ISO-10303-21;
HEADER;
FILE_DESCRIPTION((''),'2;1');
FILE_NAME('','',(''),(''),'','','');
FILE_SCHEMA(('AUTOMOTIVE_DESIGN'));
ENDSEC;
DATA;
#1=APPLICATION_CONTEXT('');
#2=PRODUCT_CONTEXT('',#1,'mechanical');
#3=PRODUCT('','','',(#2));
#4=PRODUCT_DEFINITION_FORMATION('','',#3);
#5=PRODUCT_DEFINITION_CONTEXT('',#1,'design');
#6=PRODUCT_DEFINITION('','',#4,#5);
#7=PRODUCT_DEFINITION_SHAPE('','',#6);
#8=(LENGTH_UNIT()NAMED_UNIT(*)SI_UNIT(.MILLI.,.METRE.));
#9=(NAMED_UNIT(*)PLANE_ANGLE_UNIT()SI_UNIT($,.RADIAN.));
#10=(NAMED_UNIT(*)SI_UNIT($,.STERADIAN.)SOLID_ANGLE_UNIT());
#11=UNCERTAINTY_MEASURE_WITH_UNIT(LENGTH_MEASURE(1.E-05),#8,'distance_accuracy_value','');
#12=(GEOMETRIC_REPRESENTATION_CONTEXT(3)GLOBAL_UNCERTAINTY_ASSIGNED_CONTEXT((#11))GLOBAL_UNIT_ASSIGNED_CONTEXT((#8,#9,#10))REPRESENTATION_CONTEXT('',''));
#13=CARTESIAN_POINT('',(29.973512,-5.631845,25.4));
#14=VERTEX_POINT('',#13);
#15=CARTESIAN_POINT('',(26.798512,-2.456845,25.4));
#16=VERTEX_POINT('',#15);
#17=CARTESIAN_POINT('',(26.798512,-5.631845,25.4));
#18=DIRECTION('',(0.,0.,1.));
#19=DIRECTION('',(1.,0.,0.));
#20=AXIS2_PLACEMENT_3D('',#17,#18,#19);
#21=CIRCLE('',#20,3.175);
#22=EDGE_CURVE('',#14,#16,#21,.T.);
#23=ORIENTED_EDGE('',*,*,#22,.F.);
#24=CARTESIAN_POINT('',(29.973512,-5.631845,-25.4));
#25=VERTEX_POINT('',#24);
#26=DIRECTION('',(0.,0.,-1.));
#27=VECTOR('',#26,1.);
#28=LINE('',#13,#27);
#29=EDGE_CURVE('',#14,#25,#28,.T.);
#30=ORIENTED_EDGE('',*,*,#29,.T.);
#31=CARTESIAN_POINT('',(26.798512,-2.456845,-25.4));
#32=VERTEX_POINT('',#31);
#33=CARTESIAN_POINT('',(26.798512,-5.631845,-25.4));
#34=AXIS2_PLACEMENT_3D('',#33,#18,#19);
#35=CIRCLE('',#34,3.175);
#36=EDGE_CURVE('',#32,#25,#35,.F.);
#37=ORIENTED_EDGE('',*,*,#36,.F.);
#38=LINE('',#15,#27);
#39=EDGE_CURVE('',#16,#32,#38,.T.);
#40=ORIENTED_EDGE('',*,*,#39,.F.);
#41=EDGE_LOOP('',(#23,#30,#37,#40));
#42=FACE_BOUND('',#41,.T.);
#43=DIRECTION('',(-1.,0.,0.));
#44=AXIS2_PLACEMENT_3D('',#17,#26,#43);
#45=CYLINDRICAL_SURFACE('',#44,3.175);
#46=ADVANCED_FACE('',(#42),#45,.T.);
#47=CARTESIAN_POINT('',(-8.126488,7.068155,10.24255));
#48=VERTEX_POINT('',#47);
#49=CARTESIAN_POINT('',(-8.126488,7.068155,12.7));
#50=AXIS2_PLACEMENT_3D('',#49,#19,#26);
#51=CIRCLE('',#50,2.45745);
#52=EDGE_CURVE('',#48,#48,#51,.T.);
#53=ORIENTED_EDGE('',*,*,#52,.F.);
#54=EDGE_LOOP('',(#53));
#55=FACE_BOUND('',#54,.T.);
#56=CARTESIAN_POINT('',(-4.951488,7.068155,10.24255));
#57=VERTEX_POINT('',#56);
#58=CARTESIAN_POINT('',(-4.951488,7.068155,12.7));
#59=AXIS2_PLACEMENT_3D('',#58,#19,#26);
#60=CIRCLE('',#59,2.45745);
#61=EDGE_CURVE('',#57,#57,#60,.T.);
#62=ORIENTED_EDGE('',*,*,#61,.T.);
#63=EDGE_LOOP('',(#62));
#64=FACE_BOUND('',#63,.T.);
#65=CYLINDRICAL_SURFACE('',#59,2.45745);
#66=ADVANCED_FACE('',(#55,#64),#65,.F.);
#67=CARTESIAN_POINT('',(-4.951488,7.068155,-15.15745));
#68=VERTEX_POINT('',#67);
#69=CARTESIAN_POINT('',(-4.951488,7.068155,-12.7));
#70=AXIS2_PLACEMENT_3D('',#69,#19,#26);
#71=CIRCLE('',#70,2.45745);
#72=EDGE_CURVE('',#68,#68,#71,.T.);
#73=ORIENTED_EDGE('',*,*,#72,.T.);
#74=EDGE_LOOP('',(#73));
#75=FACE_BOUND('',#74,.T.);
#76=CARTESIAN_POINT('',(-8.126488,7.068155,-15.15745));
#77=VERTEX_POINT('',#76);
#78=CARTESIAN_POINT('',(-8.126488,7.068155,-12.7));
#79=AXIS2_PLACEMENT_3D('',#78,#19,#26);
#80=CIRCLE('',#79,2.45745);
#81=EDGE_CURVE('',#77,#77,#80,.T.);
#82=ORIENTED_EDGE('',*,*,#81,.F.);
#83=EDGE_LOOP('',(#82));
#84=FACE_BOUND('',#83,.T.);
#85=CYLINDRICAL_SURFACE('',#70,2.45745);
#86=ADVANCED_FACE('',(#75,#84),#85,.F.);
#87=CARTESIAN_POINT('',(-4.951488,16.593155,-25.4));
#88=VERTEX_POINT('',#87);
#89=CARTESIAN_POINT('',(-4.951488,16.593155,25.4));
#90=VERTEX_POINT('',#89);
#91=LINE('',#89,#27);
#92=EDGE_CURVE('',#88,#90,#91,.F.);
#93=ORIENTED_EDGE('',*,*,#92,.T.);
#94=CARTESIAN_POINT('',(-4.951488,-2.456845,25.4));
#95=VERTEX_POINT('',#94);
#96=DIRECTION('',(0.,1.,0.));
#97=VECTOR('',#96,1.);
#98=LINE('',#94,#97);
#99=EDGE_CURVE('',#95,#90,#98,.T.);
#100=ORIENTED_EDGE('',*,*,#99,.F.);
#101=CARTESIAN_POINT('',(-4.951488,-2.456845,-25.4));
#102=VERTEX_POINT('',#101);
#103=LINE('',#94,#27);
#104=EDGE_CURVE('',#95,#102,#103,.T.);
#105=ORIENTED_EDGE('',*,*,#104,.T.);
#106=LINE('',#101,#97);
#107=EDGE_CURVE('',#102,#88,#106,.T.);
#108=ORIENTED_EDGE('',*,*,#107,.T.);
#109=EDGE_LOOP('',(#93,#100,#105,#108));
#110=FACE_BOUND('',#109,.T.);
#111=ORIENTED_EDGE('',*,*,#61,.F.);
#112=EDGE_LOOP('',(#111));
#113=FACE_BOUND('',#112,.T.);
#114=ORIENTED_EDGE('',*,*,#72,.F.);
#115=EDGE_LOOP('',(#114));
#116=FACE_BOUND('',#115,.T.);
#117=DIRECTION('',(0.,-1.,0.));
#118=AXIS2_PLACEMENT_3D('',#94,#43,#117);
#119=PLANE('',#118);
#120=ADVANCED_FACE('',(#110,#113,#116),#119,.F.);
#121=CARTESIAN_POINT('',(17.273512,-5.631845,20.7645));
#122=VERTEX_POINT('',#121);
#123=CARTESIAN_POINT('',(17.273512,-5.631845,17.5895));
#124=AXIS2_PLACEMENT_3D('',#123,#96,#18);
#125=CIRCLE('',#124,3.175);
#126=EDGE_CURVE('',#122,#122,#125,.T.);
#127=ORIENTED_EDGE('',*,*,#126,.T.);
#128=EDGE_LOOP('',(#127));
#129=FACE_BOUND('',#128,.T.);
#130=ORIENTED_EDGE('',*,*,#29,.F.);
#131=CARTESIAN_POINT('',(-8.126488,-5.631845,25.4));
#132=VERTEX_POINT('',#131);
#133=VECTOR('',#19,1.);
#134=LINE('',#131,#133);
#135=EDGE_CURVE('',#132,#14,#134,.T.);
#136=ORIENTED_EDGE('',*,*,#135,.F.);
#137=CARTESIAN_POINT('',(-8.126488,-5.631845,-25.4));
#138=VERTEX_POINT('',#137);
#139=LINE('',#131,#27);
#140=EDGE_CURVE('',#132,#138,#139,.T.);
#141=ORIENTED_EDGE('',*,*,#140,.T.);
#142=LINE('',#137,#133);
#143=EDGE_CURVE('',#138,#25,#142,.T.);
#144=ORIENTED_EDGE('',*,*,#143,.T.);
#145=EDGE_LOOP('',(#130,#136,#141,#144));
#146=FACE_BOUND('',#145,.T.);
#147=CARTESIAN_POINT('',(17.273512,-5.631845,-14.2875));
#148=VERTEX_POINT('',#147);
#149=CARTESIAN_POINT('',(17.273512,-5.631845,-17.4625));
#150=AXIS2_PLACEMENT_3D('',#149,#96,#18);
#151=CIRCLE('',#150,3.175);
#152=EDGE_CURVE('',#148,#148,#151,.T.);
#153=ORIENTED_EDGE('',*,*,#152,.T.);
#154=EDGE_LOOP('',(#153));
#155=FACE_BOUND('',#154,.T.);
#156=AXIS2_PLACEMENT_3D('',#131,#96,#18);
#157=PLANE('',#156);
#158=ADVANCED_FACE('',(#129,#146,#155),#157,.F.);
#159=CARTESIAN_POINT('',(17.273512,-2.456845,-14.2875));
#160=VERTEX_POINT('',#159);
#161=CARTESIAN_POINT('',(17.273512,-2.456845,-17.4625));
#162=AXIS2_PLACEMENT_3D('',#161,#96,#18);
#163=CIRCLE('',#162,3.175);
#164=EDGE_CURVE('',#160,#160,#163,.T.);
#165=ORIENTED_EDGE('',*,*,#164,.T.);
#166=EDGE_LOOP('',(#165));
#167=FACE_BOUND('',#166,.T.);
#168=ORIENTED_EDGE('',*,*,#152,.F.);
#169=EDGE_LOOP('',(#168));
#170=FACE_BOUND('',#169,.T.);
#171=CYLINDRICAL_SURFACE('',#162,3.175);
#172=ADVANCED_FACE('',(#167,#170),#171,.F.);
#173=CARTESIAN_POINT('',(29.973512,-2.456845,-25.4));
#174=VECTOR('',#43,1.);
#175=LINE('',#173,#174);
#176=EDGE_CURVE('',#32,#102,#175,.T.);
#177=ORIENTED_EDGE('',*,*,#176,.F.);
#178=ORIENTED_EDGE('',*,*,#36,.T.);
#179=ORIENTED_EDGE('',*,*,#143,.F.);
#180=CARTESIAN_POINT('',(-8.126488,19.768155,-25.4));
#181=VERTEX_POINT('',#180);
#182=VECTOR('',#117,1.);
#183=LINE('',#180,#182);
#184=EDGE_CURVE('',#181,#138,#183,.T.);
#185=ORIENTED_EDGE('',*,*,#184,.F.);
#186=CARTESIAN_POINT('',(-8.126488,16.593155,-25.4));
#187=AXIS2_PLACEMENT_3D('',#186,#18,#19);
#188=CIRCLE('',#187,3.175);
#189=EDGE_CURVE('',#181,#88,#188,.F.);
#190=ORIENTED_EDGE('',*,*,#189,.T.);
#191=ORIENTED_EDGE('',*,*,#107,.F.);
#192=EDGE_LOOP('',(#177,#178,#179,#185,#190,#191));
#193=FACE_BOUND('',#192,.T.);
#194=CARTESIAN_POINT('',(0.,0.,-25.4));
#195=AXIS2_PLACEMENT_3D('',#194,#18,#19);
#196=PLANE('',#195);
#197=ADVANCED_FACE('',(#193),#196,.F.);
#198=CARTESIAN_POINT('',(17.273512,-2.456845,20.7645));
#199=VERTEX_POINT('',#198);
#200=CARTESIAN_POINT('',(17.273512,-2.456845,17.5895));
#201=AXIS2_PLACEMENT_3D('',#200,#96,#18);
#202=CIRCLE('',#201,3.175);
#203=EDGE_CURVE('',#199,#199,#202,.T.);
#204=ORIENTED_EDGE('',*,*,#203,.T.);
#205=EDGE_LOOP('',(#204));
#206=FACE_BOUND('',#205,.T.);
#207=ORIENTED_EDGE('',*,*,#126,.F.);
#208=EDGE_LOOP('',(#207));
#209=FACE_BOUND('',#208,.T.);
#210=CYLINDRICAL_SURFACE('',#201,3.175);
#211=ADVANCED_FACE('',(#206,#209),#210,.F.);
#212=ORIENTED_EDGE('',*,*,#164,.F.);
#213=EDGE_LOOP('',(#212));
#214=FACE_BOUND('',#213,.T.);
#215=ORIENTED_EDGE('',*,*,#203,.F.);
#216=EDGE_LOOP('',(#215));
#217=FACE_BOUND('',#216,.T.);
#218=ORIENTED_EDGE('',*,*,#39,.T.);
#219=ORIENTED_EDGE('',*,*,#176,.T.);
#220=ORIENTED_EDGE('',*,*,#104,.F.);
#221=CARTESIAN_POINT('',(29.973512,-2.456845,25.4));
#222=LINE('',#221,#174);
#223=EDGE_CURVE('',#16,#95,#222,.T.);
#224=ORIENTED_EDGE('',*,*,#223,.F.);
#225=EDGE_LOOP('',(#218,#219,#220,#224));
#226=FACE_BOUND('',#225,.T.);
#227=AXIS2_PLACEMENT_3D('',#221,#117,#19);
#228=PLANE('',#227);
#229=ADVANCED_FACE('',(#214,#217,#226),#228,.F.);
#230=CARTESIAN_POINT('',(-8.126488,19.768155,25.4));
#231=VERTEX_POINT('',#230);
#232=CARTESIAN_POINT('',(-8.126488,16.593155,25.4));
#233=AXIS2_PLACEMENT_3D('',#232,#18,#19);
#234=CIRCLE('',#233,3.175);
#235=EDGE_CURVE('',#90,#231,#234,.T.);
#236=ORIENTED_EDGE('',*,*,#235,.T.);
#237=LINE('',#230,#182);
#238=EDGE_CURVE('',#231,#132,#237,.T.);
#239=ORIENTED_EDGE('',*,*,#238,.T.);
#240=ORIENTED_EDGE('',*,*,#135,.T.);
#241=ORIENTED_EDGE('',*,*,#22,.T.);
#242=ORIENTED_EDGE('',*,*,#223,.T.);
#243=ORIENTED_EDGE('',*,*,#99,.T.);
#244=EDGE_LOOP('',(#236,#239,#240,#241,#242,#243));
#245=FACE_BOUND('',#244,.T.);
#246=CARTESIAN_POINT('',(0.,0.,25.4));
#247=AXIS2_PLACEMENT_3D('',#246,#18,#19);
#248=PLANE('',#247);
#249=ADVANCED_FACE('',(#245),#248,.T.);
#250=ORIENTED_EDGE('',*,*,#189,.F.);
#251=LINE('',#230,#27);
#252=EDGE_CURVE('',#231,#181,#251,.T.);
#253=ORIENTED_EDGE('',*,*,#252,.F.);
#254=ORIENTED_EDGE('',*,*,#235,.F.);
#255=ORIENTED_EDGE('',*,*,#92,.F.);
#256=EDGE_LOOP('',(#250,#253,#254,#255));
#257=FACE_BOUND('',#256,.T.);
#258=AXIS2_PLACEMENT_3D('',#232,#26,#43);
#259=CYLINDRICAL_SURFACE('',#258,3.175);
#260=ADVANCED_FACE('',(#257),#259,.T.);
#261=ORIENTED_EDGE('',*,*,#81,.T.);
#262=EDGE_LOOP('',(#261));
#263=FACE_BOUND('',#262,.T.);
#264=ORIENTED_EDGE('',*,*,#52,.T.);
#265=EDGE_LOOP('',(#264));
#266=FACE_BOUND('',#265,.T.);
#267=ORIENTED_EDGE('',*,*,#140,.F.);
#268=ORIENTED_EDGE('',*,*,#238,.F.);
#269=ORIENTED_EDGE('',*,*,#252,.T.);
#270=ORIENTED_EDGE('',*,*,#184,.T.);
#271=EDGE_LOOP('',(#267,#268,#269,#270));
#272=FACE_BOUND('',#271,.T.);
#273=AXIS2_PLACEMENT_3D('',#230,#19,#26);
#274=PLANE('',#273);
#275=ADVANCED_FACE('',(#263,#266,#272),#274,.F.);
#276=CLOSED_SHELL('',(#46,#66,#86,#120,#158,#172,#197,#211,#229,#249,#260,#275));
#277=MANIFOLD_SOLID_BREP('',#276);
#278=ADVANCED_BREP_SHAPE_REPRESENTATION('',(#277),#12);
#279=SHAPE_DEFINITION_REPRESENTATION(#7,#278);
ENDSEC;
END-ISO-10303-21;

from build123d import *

# Parameters (mm, degrees)
BOSS_EXTRUDE1_DEPTH              = 25.4
F_1_4_0_25_DIAMETER_HOLE1_D      = 6.35
F_1_4_0_25_DIAMETER_HOLE1_DEPTH  = 17.526
F_1_4_0_25_DIAMETER_HOLE1_TIP    = 1.907732465
F_10_0_1935_DIAMETER_HOLE1_D     = 4.9149
F_10_0_1935_DIAMETER_HOLE1_DEPTH = 17.526
F_10_0_1935_DIAMETER_HOLE1_TIP   = 1.476584928
FILLET1_R                        = 3.175


with BuildPart() as part:
    # Sketch1 → Boss-Extrude1 (new, symmetric)
    with BuildSketch(Plane.XY):
        Polygon((-8.126488095, 19.768154762), (-8.126488095, -5.631845238), (29.973511905, -5.631845238), (29.973511905, -2.456845238), (-4.951488095, -2.456845238), (-4.951488095, 19.768154762), align=None)
    extrude(amount=BOSS_EXTRUDE1_DEPTH, both=True)

    # 1/4 (0.25) Diameter Hole1
    with Locations(Plane(origin=(0, -2.456845238, 0), x_dir=(1, 0, 0), z_dir=(0, 1, 0))):
        with Locations((17.273511905, 17.4625), (17.273511905, -17.5895)):
            Hole(F_1_4_0_25_DIAMETER_HOLE1_D / 2, depth=F_1_4_0_25_DIAMETER_HOLE1_DEPTH)
            with Locations((0, 0, -(F_1_4_0_25_DIAMETER_HOLE1_DEPTH + F_1_4_0_25_DIAMETER_HOLE1_TIP / 2))):  # 118° drill point
                Cone(0, F_1_4_0_25_DIAMETER_HOLE1_D / 2, F_1_4_0_25_DIAMETER_HOLE1_TIP, mode=Mode.SUBTRACT)

    # #10 (0.1935) Diameter Hole1
    with Locations(Plane(origin=(-4.951488095, 0, 0), x_dir=(0, 0, -1), z_dir=(1, 0, 0))):
        with Locations((12.7, 7.068154762), (-12.7, 7.068154762)):
            Hole(F_10_0_1935_DIAMETER_HOLE1_D / 2, depth=F_10_0_1935_DIAMETER_HOLE1_DEPTH)
            with Locations((0, 0, -(F_10_0_1935_DIAMETER_HOLE1_DEPTH + F_10_0_1935_DIAMETER_HOLE1_TIP / 2))):  # 118° drill point
                Cone(0, F_10_0_1935_DIAMETER_HOLE1_D / 2, F_10_0_1935_DIAMETER_HOLE1_TIP, mode=Mode.SUBTRACT)

    # Fillet1
    fillet1_edges = [part.edges().sort_by_distance(p)[0] for p in [
        (29.973511905, -2.456845238, 0),
        (-4.951488095, 19.768154762, 0),
    ]]
    fillet(fillet1_edges, radius=FILLET1_R - 0.0001)  # a hair under: the kernel refuses the full size


solid = part.part
